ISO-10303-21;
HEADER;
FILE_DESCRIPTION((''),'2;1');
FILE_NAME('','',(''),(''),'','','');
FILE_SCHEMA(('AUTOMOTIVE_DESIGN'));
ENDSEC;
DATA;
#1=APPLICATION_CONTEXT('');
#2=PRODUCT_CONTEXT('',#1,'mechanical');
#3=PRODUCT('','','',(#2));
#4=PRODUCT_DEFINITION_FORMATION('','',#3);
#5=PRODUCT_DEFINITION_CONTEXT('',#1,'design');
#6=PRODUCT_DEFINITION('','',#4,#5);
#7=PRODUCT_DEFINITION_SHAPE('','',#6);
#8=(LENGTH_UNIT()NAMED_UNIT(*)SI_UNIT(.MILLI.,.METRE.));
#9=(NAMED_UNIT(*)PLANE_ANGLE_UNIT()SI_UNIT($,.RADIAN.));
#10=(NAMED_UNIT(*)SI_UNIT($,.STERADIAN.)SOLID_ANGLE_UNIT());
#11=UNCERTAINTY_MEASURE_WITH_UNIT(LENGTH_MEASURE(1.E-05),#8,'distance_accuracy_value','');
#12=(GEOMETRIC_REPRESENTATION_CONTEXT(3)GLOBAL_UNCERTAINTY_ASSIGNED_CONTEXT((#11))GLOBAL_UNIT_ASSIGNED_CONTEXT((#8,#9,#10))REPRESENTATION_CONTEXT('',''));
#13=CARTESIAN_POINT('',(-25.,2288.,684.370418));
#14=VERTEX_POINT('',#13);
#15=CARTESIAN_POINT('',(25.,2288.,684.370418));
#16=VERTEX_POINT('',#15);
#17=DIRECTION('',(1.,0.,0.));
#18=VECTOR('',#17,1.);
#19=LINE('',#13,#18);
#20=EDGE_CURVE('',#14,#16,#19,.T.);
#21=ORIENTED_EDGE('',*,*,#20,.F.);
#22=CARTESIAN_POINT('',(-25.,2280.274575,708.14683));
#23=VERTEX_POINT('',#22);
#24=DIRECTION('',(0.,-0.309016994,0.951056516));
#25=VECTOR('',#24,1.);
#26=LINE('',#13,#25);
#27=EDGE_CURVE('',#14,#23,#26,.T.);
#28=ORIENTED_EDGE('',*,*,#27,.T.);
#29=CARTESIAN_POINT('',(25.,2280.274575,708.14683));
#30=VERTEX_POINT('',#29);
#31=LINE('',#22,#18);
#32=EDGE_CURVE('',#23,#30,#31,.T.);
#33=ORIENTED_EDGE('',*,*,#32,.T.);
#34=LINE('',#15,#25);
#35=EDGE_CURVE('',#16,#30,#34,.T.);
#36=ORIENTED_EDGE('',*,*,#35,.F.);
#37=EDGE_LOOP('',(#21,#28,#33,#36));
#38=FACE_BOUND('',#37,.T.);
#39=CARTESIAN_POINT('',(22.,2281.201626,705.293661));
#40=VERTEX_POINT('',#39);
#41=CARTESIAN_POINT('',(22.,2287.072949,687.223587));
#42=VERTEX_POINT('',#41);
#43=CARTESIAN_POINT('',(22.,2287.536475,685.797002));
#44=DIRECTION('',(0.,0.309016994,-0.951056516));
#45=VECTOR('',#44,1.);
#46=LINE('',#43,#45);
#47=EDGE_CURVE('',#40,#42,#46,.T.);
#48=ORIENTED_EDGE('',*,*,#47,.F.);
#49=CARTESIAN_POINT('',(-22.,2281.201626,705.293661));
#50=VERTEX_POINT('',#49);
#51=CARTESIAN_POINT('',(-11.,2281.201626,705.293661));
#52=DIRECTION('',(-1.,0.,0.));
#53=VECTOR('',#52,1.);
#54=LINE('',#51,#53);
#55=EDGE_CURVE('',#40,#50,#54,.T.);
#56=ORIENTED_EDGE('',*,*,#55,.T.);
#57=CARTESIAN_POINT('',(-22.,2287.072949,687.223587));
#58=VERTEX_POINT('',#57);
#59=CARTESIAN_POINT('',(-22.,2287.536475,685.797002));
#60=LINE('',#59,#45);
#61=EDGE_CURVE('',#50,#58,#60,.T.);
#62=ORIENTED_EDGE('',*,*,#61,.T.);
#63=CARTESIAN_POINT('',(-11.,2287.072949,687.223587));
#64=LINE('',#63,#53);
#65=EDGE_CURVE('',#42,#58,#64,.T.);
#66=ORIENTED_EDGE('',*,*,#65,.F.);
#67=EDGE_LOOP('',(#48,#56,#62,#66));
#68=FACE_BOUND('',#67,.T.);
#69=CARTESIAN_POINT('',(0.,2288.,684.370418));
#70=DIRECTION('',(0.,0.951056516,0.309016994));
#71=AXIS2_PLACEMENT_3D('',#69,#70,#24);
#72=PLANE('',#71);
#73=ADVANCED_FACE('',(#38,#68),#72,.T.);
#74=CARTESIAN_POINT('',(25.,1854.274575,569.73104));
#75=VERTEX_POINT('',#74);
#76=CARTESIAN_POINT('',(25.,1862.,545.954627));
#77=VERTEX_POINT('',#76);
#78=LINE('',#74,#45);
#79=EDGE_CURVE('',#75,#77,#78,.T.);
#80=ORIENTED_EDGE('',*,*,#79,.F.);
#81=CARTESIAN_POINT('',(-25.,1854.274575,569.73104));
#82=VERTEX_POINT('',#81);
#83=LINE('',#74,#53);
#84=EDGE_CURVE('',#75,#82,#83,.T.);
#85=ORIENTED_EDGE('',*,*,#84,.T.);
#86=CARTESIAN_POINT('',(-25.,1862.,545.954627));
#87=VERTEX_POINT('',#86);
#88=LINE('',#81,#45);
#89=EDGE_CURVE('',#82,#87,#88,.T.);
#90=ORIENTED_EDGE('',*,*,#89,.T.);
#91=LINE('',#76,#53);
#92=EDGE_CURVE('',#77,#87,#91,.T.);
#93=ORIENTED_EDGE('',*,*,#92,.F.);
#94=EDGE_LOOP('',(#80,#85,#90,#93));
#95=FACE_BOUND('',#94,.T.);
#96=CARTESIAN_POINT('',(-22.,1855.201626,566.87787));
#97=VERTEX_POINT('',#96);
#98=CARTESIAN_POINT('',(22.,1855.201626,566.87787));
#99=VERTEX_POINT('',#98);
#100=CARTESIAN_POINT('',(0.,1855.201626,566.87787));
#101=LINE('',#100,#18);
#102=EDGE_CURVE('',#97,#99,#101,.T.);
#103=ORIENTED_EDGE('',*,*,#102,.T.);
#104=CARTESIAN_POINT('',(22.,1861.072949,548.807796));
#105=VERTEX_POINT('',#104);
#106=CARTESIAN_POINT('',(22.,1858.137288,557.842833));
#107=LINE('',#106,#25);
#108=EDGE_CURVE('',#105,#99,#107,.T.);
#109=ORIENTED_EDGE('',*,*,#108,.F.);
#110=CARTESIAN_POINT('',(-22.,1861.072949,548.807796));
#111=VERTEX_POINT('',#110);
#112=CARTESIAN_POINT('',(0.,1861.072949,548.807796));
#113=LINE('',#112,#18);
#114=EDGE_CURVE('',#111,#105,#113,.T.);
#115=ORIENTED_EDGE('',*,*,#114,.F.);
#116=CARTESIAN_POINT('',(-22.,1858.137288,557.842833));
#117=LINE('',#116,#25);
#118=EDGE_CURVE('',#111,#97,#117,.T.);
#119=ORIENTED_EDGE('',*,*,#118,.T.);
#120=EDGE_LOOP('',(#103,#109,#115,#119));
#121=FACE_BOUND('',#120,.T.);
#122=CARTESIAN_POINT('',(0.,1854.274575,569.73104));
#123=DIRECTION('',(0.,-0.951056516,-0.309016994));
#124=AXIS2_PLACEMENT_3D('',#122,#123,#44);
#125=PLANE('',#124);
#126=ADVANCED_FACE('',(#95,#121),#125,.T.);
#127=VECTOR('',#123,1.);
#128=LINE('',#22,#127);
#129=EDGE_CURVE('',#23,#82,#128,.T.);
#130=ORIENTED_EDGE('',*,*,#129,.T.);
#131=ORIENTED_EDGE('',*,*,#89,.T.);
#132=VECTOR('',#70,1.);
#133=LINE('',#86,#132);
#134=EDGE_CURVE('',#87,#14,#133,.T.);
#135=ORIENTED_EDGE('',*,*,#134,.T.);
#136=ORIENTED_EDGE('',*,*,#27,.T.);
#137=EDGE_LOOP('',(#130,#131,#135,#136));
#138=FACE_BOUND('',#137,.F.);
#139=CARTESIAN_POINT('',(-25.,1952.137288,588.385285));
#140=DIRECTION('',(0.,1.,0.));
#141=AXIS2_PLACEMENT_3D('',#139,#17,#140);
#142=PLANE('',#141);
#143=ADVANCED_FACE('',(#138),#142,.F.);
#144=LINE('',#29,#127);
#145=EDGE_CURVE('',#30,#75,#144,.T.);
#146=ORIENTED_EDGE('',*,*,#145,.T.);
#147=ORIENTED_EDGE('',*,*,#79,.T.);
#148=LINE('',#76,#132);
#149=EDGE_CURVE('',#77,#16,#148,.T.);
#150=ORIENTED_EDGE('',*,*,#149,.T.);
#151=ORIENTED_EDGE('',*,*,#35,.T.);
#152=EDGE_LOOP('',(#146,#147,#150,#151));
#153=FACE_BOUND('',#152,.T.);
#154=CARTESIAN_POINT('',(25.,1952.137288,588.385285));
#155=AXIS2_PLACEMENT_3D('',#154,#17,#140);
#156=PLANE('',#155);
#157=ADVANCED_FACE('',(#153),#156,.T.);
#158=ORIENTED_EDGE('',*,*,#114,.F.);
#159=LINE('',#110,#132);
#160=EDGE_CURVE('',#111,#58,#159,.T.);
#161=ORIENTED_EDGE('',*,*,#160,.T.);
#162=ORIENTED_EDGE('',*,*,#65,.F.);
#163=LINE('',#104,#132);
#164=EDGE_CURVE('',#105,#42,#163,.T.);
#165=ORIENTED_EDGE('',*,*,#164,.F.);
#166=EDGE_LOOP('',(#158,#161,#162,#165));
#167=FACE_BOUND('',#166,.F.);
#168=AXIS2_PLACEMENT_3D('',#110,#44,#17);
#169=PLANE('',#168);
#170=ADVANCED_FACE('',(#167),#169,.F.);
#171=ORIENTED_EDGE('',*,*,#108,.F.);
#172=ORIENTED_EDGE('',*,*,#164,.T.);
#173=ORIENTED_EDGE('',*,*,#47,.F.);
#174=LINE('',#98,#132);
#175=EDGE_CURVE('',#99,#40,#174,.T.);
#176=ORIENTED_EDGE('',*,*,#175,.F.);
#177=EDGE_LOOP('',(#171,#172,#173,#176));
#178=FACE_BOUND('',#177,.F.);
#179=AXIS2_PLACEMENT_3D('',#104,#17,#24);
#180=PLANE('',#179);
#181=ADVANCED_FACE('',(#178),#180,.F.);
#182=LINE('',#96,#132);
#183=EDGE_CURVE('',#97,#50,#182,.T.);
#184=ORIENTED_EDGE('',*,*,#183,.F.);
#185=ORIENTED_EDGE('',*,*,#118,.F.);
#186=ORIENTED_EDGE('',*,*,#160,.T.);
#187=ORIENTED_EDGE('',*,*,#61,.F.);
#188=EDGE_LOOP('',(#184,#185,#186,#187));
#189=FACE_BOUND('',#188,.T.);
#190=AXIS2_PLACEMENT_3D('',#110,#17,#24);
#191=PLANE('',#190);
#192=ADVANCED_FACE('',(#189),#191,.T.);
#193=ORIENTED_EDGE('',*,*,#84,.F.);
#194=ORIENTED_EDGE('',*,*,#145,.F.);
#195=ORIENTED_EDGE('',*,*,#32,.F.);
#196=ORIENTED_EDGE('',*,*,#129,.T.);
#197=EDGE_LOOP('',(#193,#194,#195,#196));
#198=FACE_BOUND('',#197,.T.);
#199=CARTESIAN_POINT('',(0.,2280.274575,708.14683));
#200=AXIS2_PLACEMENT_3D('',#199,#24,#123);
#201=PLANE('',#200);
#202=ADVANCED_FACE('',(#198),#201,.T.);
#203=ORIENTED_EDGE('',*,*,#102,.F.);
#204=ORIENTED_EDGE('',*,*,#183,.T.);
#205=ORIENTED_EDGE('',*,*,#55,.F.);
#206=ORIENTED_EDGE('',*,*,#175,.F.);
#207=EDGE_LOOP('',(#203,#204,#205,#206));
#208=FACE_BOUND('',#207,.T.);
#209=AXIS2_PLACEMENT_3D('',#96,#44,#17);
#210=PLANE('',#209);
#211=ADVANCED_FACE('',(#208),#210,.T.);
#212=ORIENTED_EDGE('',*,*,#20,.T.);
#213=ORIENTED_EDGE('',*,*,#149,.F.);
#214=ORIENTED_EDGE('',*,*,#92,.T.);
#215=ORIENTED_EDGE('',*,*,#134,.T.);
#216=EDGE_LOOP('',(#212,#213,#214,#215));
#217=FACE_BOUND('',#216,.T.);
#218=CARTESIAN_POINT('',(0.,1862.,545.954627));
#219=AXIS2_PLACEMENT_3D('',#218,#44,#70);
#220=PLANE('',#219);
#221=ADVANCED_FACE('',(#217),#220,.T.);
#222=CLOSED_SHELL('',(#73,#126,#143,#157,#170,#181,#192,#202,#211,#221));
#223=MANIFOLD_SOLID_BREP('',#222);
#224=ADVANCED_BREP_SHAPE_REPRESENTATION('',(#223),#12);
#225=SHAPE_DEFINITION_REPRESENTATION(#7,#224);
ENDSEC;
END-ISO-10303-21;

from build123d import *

# Parameters (mm, degrees)
F1_DEPTH = 25
F2_W     = 44
F2_H     = 19
F3_DEPTH = 455.2712231792


# Not quite as in the source:
# - a feature names something its author has since deleted; it is built from what else it names


with BuildPart() as f1:
    # F0 (on Right) → F1 (new body, symmetric)
    with BuildSketch(Plane.YZ):
        Polygon((1862, 545.9546269485), (2050, 607.0395298403), (2042.2745751406, 630.8159427477), (1854.2745751406, 569.7310398559), align=None)
        Polygon((2042.2745751406, 630.8159427477), (2050, 607.0395298403), (2100, 623.2855146519), (2092.2745751406, 647.0619275593), align=None)
        Polygon((2092.2745751406, 647.0619275593), (2100, 623.2855146519), (2288, 684.3704175437), (2280.2745751406, 708.1468304511), align=None)
    extrude(amount=F1_DEPTH, both=True)

    # F2 (on face) → F3 (cut, through all)
    with BuildSketch(Plane(origin=(0, 1844.6468608337, 599.3620976791), x_dir=(1, 0, 0), z_dir=(0, -0.9510565163, -0.3090169944))):
        with Locations((0, -43.6559379653)):
            Rectangle(F2_W, F2_H)
    extrude(amount=-F3_DEPTH, mode=Mode.SUBTRACT)


solid = f1.part
